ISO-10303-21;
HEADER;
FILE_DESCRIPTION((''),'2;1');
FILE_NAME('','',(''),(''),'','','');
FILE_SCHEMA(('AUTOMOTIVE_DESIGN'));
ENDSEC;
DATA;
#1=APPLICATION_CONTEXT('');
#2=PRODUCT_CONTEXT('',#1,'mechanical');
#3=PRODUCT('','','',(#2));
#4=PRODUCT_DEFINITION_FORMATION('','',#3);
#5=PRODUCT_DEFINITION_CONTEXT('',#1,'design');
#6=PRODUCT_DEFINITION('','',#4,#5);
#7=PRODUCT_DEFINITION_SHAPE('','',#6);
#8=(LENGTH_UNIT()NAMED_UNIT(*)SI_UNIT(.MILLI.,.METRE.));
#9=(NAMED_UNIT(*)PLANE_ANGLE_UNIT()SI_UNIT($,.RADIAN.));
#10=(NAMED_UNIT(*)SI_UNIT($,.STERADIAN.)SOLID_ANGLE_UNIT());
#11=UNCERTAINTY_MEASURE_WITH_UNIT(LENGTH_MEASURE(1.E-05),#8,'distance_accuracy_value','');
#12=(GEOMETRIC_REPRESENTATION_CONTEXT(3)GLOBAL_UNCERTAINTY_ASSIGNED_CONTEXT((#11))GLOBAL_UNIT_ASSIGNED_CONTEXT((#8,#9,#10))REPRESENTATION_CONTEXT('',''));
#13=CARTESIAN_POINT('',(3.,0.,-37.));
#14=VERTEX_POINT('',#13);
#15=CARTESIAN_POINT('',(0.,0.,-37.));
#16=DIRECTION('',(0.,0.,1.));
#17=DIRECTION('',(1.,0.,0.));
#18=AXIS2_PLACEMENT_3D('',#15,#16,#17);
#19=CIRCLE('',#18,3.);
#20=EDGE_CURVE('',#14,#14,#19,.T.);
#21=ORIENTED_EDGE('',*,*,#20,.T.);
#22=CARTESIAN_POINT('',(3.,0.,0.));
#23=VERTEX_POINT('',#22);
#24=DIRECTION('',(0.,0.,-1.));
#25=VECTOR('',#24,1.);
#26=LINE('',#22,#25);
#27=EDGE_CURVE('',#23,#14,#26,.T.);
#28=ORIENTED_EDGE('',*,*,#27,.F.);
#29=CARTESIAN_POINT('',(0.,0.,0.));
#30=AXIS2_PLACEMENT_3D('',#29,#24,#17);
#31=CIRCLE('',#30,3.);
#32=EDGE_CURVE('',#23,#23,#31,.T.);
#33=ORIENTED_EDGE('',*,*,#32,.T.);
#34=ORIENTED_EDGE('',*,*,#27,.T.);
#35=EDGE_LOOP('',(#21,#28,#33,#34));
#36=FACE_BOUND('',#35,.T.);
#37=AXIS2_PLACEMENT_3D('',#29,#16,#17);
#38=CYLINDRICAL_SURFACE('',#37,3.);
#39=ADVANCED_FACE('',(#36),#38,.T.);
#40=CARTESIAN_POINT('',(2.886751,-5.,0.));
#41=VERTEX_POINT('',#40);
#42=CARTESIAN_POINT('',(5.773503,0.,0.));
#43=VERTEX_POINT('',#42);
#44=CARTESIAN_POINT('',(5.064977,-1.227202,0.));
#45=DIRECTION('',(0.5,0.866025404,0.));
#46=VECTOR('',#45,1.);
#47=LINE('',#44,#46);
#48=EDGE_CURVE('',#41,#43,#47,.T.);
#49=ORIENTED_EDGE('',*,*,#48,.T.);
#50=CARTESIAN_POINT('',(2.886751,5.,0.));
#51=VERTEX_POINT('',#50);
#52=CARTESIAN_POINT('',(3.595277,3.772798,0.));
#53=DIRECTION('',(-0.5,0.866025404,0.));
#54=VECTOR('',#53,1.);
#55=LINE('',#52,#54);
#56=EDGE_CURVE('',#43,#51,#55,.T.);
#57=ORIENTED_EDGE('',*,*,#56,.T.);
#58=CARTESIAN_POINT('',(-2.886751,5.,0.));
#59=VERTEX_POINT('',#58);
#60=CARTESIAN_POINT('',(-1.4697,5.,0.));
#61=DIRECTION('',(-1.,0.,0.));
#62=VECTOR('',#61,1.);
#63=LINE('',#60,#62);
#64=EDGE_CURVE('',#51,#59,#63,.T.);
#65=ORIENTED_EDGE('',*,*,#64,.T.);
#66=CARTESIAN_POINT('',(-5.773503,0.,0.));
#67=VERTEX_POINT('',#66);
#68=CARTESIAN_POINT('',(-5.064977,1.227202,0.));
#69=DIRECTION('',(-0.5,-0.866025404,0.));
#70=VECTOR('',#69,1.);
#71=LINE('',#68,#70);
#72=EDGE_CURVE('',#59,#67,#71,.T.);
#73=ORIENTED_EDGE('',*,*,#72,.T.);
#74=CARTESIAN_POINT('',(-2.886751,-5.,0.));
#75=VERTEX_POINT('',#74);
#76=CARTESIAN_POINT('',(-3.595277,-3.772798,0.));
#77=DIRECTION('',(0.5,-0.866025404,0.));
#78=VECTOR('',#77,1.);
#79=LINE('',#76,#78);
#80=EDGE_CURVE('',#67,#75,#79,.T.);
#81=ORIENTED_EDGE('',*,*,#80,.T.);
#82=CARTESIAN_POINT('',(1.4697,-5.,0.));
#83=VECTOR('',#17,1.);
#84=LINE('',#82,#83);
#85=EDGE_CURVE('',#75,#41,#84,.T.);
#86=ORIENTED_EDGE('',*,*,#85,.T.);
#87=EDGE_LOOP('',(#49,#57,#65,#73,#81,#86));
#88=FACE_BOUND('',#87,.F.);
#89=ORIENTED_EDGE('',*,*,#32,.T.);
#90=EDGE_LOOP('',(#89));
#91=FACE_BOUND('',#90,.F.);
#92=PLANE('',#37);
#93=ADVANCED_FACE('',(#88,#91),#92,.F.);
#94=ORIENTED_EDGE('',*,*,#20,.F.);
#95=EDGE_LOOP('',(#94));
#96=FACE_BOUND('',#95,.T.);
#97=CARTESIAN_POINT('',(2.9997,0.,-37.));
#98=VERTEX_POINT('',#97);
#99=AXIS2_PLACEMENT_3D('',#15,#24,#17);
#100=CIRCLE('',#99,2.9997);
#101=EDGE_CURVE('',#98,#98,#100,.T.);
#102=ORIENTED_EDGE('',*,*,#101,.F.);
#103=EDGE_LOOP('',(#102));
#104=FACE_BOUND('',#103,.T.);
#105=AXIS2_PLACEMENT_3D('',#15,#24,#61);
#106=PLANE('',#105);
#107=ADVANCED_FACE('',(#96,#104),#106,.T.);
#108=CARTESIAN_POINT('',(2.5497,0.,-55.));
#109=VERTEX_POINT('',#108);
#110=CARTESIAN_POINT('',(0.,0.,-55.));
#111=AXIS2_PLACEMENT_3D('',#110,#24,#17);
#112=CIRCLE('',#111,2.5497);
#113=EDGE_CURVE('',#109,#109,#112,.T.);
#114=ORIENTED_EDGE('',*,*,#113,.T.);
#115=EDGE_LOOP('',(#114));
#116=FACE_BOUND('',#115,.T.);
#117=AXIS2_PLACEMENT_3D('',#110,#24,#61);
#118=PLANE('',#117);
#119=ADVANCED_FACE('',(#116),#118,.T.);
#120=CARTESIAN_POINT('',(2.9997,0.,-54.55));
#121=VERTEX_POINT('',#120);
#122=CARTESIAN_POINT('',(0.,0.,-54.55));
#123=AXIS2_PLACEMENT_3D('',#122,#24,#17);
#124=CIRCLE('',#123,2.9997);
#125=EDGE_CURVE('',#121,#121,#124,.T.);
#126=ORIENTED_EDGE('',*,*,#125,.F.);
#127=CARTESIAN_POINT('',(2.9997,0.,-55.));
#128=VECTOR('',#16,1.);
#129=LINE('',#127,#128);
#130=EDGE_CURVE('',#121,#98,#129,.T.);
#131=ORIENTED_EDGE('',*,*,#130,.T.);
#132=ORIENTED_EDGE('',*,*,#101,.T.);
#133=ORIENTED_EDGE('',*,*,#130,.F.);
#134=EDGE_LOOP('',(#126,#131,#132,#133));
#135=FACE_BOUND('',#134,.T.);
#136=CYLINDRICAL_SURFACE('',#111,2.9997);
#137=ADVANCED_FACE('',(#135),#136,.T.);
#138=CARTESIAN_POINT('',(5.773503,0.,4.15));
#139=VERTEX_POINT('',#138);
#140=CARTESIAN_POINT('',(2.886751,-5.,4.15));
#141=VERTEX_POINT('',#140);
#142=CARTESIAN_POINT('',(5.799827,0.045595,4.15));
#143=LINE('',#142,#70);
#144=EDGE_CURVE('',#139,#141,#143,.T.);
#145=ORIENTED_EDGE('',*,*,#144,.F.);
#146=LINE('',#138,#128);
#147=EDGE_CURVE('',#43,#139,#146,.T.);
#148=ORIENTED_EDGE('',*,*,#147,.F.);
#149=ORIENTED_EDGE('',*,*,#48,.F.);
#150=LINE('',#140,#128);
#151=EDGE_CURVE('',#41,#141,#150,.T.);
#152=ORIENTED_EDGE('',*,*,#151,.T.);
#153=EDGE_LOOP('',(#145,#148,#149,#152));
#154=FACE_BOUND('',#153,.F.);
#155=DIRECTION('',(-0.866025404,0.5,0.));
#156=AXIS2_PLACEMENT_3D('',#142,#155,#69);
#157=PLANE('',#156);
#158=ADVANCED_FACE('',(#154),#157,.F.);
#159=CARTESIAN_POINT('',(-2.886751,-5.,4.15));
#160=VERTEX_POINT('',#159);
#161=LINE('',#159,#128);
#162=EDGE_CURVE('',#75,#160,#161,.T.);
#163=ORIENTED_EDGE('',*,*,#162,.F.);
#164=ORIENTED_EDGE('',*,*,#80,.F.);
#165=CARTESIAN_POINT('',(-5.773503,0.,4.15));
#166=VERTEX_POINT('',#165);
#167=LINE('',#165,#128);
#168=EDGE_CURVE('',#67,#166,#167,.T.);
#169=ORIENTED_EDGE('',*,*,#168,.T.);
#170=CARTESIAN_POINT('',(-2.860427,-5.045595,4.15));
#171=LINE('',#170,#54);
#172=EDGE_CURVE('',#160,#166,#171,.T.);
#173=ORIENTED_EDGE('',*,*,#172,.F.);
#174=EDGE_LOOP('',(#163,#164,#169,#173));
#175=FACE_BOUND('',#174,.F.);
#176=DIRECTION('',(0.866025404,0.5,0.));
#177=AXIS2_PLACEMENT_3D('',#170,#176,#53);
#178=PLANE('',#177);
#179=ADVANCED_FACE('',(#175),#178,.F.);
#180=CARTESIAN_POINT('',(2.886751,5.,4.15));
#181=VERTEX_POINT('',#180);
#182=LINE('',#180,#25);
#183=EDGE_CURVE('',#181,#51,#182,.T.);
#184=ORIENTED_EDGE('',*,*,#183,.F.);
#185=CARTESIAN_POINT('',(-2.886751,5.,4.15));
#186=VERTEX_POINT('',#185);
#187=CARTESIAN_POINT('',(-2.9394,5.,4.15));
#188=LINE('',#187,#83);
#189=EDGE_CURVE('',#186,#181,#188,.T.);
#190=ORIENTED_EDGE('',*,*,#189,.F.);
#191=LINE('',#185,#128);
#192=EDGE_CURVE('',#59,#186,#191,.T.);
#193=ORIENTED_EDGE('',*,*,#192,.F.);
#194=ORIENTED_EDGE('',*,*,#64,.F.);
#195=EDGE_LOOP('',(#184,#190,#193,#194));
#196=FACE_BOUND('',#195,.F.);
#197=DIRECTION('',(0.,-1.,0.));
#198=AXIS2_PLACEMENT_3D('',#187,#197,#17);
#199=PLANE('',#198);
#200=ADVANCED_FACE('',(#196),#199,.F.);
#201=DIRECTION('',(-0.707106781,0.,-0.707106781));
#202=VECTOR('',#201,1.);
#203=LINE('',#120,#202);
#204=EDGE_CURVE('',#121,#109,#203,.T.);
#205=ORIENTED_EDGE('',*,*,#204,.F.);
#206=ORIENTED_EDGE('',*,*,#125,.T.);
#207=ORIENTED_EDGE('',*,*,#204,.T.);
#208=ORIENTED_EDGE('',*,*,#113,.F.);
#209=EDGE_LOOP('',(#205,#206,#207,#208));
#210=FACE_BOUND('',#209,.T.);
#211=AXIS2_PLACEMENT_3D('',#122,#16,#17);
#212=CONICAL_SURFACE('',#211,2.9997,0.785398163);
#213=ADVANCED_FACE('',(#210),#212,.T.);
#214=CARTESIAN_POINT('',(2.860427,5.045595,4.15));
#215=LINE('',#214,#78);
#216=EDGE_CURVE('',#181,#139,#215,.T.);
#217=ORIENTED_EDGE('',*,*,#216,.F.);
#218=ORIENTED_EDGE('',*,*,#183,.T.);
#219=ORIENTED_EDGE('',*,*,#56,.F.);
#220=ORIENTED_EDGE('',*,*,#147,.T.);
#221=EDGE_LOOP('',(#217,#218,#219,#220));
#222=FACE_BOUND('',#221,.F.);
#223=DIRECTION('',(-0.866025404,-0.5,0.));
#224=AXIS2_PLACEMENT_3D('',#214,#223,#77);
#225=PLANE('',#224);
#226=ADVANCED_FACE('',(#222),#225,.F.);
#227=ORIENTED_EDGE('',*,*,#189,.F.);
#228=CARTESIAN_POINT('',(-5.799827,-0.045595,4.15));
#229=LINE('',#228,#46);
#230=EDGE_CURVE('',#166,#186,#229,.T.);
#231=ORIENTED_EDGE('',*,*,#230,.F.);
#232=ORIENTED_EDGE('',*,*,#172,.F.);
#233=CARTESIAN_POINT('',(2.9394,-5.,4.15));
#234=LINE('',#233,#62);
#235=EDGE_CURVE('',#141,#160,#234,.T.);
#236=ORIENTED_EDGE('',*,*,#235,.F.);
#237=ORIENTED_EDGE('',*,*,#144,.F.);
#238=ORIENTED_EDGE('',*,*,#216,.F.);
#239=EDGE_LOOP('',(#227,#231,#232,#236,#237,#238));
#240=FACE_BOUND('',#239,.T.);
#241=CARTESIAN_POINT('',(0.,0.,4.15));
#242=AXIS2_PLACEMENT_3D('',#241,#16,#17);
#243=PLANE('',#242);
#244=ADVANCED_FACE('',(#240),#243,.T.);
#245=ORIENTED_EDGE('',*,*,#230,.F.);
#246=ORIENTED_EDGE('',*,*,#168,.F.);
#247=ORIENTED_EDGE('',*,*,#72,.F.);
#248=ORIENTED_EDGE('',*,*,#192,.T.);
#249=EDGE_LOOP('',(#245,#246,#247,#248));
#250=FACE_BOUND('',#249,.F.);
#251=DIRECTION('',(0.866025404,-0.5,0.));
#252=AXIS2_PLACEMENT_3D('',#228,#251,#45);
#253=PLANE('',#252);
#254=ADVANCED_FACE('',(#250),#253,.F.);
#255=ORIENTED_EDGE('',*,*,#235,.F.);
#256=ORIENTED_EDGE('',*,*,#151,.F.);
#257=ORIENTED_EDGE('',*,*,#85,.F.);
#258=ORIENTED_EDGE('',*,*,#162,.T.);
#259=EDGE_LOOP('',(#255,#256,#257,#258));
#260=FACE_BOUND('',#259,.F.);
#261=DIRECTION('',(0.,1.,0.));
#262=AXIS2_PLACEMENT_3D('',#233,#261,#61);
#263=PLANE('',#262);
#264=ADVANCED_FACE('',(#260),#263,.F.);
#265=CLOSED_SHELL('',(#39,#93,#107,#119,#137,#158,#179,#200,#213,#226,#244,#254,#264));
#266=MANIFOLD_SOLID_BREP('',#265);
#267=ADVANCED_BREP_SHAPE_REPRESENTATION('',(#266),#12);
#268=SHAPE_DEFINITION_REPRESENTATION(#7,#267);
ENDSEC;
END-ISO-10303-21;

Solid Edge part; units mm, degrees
sketch "Sketch1" plane through (0, 0, 0) normal (0, 0, 1) x (1, 0, 0)
  circle A0 centre (0, 0) radius 5.8
  dimension "D1" = 11.6
extrude "Protrusion1" add sketch "Sketch1" along normal blind 4.15
sketch "Sketch2" plane through (0, 0, 0) normal (0, 0, -1) x (1, 0, 0)
  circle A0 centre (0, 0) radius 3
extrude "Protrusion2" add sketch "Sketch2" along normal blind 55
sketch "Sketch3" plane through (0, 0, -55) normal (0, 0, -1) x (1, 0, 0)
  circle A0 centre (0, 0) radius 2.9997
extrude "Cutout1" cut sketch "Sketch3" against normal blind 18 flip side to cut
chamfer "Chamfer_1" distance 0.45 angle 45 1 edges at (-2.9997, 0, -55)
sketch "Sketch4" plane through (0, 0, 4.15) normal (0, 0, 1) x (1, 0, 0)
  line L0 (-2.9394, 5) -> (2.9394, 5)
  dimension "D1" = 10
extrude "Cutout2" cut sketch "Sketch4" against normal up to next material side at (0, 5.05, 4.15)
pattern_circular "Pattern1" count 6 over 360 about axis through (0, 0, 4.15) along (0, 0, 1) of "Cutout2"
properties part number "24104766"
